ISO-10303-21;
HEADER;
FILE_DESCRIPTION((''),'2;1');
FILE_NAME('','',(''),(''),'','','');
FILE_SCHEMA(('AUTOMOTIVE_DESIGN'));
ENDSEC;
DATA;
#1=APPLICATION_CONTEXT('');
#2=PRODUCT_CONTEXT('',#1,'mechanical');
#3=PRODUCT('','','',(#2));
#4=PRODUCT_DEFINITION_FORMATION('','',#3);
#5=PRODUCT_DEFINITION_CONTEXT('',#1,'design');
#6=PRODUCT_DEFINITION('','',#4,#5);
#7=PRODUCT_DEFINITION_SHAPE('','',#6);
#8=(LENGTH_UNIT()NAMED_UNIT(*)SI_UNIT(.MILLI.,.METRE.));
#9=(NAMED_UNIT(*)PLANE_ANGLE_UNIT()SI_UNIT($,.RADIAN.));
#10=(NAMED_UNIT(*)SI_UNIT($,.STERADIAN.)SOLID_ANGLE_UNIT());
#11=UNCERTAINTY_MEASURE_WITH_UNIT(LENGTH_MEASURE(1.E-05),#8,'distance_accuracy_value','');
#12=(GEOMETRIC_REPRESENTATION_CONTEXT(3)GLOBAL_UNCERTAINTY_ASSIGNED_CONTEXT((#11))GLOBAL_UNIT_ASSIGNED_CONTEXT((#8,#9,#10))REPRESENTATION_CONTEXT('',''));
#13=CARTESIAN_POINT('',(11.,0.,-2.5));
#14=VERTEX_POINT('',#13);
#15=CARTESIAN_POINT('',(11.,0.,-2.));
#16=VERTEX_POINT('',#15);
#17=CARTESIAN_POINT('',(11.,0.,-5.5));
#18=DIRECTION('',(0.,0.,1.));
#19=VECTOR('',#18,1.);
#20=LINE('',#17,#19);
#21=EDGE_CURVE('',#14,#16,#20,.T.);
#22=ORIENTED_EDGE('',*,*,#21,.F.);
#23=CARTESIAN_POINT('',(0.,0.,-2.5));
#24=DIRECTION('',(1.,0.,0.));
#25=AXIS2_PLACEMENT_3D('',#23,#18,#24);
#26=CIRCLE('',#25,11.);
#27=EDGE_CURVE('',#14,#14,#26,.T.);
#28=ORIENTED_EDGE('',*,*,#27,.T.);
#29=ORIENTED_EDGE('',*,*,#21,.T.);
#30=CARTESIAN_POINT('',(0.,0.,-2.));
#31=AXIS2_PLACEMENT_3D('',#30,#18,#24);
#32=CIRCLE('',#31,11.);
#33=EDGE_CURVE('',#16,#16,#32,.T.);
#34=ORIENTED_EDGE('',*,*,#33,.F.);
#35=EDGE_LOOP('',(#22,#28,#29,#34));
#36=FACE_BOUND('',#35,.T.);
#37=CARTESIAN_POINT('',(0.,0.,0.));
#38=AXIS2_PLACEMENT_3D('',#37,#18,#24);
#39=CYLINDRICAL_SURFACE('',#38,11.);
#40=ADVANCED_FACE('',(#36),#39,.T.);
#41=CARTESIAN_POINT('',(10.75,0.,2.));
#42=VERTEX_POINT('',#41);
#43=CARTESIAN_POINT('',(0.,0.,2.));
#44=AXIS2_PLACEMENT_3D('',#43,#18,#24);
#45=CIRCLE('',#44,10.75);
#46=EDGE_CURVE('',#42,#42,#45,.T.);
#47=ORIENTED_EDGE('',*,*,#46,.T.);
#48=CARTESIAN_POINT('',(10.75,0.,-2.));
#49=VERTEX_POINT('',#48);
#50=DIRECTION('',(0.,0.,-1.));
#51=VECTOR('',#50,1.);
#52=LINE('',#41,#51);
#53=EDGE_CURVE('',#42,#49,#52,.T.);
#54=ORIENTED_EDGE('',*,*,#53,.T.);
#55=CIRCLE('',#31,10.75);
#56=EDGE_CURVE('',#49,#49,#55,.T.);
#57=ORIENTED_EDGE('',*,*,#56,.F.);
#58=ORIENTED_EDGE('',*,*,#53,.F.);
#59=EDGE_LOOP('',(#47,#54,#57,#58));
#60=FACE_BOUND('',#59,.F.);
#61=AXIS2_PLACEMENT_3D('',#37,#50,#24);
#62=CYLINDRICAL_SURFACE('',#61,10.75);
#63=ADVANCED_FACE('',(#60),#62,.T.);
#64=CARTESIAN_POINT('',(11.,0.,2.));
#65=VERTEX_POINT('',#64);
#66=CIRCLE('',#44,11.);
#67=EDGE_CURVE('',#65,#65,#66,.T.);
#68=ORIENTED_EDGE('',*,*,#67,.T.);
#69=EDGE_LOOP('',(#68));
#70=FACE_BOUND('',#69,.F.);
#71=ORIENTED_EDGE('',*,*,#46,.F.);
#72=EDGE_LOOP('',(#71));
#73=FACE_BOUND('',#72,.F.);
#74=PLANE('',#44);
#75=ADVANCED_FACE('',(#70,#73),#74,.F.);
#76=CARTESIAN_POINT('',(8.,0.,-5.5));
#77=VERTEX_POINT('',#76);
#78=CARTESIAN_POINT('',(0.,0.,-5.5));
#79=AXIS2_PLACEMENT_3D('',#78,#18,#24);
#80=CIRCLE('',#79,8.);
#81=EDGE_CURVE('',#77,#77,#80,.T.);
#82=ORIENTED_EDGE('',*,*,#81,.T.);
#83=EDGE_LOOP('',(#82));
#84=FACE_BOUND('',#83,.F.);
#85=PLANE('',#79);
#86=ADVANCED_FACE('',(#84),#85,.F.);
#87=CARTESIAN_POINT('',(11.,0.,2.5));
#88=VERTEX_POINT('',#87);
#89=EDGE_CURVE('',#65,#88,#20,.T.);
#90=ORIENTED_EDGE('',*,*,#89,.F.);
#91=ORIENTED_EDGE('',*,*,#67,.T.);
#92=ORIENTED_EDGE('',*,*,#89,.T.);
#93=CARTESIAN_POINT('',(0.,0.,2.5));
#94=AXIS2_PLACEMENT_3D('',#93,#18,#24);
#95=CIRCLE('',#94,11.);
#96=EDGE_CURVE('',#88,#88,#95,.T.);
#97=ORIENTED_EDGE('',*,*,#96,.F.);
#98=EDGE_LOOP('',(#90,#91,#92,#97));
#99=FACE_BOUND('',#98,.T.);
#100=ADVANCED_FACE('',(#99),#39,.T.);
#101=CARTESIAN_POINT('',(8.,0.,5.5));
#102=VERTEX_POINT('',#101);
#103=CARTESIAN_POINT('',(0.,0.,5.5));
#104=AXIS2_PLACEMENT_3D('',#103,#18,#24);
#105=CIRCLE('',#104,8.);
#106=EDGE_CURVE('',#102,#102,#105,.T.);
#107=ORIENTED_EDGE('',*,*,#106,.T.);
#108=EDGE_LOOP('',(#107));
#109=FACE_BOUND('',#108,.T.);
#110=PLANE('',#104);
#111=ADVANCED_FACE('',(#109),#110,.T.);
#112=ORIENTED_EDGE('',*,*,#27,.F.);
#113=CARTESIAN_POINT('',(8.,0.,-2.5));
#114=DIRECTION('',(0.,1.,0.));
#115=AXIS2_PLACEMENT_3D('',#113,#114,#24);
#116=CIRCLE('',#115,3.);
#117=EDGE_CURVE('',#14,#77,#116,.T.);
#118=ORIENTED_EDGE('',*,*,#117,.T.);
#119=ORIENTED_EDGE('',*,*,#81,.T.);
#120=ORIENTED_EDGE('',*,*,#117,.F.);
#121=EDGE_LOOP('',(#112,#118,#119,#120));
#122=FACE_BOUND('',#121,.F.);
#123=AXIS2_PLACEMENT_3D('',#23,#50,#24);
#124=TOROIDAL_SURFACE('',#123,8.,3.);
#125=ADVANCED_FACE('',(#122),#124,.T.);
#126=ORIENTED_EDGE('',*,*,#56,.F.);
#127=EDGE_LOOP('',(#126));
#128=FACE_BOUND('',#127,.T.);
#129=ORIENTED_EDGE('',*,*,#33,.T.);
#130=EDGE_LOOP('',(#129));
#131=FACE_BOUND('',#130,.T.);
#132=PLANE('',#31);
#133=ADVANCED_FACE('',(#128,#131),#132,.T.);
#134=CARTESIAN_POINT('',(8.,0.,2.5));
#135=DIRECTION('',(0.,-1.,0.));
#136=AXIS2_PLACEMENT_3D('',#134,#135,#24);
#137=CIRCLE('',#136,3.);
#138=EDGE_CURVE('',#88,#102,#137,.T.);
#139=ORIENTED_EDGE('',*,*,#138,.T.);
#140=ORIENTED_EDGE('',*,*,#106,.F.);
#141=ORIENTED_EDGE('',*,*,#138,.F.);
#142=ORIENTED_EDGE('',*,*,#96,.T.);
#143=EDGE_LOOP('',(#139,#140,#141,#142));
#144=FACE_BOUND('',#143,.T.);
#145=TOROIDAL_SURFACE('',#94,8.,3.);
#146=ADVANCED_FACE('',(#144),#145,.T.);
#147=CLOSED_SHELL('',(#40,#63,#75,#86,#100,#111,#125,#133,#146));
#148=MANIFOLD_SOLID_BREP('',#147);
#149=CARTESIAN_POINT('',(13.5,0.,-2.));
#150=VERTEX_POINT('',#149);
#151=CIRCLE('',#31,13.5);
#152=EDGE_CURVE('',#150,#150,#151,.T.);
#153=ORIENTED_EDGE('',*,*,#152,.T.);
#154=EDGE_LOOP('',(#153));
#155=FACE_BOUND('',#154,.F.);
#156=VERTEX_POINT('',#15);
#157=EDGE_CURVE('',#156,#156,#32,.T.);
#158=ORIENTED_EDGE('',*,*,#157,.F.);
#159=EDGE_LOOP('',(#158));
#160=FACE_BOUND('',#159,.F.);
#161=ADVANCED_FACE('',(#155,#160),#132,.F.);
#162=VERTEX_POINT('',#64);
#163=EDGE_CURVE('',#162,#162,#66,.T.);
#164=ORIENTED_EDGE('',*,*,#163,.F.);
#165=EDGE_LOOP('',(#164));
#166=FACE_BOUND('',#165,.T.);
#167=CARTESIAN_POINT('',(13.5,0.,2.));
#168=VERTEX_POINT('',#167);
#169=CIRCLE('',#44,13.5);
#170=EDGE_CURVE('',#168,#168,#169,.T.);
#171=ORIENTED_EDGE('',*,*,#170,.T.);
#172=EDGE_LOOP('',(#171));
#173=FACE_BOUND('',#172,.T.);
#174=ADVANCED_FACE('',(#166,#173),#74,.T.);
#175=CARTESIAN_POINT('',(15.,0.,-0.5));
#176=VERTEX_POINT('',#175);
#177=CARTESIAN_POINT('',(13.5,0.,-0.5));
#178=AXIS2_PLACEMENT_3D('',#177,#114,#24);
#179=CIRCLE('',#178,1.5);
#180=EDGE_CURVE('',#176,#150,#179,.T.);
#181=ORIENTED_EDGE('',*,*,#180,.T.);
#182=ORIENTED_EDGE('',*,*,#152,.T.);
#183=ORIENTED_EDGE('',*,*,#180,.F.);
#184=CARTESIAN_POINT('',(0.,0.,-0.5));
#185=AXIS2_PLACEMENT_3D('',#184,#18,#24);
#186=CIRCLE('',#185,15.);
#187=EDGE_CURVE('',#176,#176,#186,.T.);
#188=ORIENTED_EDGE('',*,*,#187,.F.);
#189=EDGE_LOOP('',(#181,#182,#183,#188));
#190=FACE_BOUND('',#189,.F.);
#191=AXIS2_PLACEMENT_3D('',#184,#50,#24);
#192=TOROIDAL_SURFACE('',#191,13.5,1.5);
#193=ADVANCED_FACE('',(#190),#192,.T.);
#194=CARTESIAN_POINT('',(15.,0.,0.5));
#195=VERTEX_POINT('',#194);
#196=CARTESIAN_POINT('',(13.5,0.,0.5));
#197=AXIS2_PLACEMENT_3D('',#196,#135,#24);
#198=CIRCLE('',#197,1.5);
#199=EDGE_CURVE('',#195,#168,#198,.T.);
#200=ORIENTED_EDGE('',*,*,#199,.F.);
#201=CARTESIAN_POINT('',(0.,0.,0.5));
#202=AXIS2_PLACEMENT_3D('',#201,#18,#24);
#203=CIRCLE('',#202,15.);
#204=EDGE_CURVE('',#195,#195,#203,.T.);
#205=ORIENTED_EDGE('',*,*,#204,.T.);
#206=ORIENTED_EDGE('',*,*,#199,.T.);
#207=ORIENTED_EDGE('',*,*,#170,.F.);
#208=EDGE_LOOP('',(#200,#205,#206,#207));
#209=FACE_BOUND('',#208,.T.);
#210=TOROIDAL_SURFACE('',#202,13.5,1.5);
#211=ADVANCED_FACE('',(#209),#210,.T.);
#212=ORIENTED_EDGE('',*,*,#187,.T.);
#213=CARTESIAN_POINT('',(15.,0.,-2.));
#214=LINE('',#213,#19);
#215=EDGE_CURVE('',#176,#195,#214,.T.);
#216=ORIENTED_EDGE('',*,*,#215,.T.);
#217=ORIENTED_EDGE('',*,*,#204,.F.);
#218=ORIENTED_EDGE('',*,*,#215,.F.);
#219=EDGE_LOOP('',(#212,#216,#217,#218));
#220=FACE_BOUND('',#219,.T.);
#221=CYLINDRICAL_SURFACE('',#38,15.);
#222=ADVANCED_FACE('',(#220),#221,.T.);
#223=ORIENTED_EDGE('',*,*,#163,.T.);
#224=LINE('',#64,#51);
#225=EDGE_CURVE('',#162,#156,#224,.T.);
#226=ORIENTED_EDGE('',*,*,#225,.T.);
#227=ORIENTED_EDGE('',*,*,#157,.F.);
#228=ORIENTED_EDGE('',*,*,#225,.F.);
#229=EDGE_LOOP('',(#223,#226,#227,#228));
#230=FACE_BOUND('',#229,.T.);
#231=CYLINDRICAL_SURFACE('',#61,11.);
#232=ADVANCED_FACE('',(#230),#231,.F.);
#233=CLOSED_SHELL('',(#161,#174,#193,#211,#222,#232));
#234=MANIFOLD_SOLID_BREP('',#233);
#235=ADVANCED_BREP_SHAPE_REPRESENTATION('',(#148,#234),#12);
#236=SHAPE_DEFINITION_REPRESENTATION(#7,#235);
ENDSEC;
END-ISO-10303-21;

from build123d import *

# Parameters (mm, degrees)
F2_R     = 15
F2_R_2   = 11
F3_DEPTH = 2
F4_R     = 11
F5_DEPTH = 5.5
F6_R     = 3
F7_R     = 1.5
F8_R     = 15
F8_R_2   = 10.75
F9_DEPTH = 2


with BuildPart() as f3:
    # F2 (on Top) → F3 (new body, symmetric)
    with BuildSketch(Plane.XY):
        Circle(F2_R)
        Circle(F2_R_2, mode=Mode.SUBTRACT)
    extrude(amount=F3_DEPTH, both=True)

    # F7
    f7_edges = [f3.edges().sort_by_distance(p)[0] for p in [
        (-15, 0, -2),
        (15, 0, 0),
        (-15, 0, 2),
    ]]
    fillet(f7_edges, radius=F7_R)


with BuildPart() as f5:
    # F4 (on Top) → F5 (new body, symmetric)
    with BuildSketch(Plane.XY):
        Circle(F4_R)
    extrude(amount=F5_DEPTH, both=True)

    # F6
    f6_edges = [f5.edges().sort_by_distance(p)[0] for p in [
        (-11, 0, 5.5),
        (-11, 0, -5.5),
    ]]
    fillet(f6_edges, radius=F6_R)


with BuildPart() as f9:
    # F8 (on Top) → F9 (new body, symmetric)
    with BuildSketch(Plane.XY):
        Circle(F8_R)
        Circle(F8_R_2, mode=Mode.SUBTRACT)
    extrude(amount=F9_DEPTH, both=True)


with BuildPart() as f5_1:
    add(f5.part)

    # F10: cut F9
    add(f9.part, mode=Mode.SUBTRACT)


solid = Compound([f3.part, f5_1.part])
